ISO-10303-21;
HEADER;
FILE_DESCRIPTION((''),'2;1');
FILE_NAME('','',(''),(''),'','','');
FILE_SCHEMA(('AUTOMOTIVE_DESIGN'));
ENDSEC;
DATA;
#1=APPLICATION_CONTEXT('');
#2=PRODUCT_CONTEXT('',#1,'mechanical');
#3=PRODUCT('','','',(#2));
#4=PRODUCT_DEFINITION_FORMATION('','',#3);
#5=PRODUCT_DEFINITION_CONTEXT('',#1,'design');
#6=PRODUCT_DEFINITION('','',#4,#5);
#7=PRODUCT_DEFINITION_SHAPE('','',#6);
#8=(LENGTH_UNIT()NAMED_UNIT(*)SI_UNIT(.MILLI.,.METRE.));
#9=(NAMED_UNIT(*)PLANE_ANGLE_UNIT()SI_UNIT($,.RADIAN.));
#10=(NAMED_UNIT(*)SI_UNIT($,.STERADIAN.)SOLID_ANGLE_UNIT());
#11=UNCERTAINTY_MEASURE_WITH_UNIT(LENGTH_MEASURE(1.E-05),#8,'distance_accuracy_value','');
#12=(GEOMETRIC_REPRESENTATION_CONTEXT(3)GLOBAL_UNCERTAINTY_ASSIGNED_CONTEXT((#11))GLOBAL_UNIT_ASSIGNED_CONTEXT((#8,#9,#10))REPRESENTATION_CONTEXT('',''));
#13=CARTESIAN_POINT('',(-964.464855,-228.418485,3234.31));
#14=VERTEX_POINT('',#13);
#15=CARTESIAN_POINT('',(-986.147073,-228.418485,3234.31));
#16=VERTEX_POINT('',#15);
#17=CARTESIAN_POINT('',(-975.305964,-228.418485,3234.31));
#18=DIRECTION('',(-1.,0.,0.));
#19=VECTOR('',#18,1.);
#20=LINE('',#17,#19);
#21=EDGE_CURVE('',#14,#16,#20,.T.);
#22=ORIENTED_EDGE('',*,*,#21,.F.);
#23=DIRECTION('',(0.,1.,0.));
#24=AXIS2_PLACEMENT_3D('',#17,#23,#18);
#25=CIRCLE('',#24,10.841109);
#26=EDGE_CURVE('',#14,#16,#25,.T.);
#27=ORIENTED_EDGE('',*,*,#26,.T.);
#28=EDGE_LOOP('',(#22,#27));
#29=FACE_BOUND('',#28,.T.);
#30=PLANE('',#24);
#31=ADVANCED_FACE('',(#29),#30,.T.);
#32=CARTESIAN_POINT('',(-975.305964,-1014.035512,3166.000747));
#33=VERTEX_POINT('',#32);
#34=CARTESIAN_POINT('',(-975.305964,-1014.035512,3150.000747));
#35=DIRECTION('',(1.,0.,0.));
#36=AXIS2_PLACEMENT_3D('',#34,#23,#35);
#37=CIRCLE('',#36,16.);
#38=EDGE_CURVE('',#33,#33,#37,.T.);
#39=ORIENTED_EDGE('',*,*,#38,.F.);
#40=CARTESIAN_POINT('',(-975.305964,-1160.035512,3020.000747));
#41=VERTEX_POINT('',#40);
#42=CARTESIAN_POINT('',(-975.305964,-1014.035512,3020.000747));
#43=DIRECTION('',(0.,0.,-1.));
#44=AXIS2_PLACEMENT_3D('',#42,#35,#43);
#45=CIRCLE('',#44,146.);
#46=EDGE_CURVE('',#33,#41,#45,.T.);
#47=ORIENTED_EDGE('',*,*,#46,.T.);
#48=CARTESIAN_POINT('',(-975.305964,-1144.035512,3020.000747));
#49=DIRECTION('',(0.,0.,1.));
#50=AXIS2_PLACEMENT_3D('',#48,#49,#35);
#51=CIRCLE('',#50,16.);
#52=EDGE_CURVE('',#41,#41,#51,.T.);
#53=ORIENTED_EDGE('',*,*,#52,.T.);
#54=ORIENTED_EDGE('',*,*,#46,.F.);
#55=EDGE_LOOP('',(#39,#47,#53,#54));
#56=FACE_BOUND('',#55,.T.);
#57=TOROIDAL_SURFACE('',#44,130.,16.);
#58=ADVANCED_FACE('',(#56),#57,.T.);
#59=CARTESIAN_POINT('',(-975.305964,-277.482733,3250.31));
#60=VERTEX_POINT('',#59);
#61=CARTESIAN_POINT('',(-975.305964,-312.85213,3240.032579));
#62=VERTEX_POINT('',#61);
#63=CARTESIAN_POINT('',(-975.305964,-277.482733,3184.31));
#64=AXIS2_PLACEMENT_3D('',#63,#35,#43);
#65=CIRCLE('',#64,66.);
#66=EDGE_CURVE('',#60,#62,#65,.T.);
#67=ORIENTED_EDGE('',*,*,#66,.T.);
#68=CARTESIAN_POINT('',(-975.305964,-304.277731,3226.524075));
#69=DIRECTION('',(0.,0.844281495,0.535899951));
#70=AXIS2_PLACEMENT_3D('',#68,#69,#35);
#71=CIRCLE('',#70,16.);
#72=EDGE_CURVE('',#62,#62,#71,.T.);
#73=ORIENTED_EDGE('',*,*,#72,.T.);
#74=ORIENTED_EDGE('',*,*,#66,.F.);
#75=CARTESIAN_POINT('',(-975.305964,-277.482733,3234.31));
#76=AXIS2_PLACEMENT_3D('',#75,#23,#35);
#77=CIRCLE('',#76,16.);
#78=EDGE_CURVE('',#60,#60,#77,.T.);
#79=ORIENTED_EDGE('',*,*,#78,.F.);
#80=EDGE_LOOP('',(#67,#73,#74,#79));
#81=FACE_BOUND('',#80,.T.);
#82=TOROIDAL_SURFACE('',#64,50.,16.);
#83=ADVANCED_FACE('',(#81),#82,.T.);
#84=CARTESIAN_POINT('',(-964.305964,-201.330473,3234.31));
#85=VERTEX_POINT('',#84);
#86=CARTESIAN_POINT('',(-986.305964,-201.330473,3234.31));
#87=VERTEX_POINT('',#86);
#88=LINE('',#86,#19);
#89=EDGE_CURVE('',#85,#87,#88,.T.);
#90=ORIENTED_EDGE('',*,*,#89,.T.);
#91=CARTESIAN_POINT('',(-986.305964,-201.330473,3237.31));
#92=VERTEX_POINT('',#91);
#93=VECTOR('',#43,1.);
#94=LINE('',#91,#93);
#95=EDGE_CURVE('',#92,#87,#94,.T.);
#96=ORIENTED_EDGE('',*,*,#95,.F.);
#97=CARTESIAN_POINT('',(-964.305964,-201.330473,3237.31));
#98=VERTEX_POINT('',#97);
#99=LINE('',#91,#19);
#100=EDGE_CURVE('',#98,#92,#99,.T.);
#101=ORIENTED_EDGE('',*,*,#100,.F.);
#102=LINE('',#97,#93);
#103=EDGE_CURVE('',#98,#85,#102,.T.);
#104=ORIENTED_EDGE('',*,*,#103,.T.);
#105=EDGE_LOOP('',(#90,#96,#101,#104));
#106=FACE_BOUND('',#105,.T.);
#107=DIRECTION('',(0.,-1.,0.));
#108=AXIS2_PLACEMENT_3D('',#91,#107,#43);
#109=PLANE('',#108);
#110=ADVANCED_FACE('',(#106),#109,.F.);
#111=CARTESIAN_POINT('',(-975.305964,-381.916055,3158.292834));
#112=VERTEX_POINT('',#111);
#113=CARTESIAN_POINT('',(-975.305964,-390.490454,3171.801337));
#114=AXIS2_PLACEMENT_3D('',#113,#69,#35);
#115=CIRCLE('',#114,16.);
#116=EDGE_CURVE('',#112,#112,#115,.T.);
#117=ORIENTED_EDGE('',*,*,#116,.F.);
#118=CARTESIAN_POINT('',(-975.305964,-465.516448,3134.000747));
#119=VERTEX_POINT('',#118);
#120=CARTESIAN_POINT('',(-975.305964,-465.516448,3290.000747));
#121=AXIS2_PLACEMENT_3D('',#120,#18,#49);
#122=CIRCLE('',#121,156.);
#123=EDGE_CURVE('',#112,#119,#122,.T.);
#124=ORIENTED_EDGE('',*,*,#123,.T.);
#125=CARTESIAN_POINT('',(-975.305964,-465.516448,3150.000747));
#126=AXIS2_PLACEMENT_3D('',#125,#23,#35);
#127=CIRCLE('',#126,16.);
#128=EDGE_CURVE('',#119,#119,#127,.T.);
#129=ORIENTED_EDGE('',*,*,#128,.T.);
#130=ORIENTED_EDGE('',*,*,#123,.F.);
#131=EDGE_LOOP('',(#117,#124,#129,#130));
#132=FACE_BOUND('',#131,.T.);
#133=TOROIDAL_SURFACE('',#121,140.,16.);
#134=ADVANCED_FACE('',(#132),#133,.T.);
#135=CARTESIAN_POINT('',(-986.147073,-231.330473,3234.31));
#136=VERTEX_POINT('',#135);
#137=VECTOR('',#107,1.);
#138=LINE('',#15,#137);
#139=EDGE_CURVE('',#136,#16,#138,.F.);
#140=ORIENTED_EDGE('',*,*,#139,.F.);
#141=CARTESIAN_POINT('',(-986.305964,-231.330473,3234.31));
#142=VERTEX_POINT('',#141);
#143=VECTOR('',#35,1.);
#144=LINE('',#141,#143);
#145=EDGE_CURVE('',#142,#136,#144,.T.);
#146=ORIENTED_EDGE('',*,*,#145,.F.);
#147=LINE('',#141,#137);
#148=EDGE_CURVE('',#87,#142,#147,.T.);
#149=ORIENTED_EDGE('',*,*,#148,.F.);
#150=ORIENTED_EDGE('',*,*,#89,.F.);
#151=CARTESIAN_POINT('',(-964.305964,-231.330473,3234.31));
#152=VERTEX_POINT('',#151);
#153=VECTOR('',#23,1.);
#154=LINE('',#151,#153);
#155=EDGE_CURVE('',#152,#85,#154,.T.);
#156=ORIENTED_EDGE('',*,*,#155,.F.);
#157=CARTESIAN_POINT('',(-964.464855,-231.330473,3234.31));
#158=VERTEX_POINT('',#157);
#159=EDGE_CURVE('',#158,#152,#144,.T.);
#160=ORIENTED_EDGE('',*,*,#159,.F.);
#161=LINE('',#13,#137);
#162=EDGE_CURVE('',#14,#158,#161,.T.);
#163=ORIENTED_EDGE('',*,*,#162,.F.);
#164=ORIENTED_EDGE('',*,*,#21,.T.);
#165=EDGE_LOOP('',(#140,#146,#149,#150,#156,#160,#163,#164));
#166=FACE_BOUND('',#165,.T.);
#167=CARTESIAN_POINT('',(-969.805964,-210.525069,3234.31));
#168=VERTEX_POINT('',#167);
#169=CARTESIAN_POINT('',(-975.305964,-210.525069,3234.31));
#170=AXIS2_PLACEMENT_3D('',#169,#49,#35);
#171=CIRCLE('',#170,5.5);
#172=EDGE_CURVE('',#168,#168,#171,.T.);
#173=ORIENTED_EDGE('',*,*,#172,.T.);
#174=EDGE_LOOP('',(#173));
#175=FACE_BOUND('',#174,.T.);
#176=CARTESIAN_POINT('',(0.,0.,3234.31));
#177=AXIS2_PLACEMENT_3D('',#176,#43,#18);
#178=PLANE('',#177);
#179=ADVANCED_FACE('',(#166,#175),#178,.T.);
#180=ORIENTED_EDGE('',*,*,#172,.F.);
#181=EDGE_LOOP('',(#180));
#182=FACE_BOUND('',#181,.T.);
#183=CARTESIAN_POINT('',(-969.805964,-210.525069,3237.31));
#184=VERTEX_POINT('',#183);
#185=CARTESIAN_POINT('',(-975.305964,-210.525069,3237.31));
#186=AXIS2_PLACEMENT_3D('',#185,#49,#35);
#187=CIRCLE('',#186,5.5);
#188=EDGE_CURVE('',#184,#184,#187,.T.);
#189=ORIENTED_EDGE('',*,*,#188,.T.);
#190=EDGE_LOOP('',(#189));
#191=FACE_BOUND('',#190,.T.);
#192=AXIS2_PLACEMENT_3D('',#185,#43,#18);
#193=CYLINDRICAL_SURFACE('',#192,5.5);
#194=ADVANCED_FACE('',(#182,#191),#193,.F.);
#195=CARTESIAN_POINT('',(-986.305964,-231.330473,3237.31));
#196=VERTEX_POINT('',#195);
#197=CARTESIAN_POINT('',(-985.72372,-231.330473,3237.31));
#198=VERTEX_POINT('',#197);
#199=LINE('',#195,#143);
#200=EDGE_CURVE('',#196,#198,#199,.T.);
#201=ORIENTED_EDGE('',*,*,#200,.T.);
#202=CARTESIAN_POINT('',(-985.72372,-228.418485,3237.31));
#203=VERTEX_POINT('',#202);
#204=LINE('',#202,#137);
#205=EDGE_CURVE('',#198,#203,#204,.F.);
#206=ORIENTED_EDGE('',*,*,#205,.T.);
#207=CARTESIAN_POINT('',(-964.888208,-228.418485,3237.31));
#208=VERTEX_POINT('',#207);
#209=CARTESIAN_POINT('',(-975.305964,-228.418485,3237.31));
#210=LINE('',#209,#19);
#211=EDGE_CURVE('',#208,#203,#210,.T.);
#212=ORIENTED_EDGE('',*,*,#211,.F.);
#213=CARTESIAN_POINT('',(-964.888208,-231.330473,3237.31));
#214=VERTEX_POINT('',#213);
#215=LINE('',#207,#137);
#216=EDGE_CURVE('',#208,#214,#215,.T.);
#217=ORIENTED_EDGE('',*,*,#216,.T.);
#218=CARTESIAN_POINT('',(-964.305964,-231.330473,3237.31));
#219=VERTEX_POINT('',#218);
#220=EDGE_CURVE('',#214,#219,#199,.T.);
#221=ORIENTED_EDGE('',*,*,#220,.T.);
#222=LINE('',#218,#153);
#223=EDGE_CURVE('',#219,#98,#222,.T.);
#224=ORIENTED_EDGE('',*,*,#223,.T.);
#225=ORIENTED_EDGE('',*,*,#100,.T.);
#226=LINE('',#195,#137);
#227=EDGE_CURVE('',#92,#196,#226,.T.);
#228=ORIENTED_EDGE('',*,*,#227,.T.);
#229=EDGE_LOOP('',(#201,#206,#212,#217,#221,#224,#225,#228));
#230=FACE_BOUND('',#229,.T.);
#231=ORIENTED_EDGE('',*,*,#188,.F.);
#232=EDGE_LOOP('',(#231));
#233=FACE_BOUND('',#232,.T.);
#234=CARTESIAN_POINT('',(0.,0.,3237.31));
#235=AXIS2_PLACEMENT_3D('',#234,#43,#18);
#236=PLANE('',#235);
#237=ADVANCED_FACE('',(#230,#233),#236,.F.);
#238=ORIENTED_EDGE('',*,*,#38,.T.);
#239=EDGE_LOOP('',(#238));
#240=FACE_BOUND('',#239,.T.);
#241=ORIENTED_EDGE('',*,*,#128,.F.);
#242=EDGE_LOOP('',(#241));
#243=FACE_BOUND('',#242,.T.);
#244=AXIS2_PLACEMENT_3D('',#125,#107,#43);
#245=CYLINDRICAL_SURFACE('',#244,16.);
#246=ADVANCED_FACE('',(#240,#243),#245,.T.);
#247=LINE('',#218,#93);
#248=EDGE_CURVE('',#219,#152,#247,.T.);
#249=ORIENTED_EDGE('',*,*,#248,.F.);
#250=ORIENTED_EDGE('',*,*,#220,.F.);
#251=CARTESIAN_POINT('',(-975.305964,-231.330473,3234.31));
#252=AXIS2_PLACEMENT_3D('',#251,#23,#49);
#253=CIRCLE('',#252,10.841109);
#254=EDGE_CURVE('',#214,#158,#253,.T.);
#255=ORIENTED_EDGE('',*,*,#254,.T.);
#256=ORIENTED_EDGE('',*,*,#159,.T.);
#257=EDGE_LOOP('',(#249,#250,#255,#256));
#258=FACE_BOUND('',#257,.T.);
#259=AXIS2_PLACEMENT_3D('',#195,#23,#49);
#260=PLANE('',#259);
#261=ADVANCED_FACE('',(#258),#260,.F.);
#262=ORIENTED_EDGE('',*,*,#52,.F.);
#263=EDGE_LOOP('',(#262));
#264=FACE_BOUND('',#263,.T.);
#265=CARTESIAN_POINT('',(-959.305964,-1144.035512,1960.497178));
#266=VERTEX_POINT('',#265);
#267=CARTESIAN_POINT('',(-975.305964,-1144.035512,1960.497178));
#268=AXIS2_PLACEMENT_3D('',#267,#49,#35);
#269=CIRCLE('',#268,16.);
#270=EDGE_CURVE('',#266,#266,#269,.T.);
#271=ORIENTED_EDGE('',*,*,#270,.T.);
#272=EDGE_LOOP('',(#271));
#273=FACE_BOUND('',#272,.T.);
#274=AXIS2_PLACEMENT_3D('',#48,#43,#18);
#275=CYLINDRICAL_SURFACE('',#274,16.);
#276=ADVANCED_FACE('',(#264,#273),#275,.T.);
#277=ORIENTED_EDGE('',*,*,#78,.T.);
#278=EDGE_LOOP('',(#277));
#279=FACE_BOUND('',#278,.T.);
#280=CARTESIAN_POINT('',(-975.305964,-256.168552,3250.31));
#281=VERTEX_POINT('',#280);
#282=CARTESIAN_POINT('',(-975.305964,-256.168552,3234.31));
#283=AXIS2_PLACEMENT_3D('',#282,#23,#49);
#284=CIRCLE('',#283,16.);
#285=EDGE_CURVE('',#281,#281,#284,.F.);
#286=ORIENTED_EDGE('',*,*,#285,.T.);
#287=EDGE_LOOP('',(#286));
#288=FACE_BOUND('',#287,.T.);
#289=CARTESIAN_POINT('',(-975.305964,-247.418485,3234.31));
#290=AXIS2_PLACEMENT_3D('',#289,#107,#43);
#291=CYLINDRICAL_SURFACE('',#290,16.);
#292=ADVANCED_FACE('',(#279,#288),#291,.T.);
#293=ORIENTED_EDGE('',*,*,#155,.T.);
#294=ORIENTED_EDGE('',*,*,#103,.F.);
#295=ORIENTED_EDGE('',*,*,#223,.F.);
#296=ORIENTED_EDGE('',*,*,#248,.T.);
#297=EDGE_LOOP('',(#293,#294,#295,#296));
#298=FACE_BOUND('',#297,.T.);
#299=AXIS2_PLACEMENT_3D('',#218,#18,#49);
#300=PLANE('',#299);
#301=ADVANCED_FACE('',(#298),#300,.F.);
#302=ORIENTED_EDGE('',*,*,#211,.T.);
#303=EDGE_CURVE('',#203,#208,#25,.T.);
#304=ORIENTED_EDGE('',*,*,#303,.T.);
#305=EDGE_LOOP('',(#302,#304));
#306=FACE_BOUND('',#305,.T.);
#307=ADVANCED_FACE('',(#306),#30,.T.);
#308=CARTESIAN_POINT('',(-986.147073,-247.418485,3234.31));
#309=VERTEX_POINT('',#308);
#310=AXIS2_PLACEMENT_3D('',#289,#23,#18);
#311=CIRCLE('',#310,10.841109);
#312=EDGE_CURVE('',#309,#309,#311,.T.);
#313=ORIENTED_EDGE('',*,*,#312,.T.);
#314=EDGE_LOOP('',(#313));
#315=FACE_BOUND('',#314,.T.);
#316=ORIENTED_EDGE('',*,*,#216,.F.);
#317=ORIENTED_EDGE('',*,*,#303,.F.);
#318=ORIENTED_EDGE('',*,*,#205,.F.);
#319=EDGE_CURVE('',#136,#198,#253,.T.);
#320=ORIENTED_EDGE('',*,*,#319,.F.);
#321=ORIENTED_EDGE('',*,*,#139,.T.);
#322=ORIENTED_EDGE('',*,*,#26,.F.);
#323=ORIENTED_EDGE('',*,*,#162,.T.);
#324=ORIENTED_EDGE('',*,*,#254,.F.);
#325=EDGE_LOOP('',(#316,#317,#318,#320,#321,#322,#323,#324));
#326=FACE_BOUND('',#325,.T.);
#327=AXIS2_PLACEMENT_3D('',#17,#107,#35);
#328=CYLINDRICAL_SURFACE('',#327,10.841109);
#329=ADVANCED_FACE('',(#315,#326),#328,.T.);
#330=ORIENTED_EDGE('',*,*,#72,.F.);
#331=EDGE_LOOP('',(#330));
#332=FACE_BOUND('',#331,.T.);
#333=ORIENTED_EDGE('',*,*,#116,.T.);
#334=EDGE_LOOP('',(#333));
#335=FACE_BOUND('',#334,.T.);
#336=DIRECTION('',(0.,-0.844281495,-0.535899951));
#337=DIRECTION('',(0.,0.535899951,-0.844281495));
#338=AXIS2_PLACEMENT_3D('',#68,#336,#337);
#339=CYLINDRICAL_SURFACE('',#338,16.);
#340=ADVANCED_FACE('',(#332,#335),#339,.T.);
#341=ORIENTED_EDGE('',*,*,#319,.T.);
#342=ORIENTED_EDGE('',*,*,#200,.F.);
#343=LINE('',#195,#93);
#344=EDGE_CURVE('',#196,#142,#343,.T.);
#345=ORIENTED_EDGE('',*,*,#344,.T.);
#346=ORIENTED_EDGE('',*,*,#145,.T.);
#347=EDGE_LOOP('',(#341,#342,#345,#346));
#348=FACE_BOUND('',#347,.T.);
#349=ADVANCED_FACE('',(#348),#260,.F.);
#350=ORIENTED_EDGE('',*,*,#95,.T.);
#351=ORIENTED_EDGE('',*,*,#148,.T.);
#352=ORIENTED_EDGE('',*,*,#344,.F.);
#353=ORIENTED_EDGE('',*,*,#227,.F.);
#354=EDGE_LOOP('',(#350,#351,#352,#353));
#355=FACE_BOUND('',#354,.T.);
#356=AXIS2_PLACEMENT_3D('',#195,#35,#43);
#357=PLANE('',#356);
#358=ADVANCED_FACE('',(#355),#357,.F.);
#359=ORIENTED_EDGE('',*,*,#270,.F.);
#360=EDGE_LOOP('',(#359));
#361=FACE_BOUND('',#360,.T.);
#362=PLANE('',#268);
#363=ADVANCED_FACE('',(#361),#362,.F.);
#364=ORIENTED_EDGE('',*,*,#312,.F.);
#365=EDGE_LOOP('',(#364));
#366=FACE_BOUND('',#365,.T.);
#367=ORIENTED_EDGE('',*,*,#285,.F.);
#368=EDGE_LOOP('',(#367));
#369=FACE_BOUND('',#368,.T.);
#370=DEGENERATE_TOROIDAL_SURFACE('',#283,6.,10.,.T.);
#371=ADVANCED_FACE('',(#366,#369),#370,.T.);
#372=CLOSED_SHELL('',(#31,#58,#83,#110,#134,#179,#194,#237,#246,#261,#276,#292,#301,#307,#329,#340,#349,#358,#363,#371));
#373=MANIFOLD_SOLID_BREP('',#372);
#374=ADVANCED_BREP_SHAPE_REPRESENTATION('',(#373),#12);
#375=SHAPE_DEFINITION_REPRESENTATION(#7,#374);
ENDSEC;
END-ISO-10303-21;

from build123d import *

# Parameters (mm, degrees)
BARRER1_PROFILE_R       = 16
CROQUIS14_W             = 22
CROQUIS14_H             = 30
CROQUIS14_R             = 5.5
SALIENTE_EXTRUIR1_DEPTH = 3
CROQUIS15_R             = 10.841108792
SALIENTE_EXTRUIR2_DEPTH = 19
REDONDEO1_R             = 10


with BuildPart() as part:
    # Barrer1: sweep along a curve in space
    with BuildLine() as barrer1_path:
        Line((-975.305963879, -247.418485436, 3234.31), (-975.305963879, -277.482733156, 3234.31))
        ThreePointArc((-975.305963879, -277.482733156, 3234.31), (-975.305963879, -291.434368594, 3232.3240799), (-975.305963879, -304.277730703, 3226.524074744))
        Line((-975.305963879, -304.277730703, 3226.524074744), (-975.305963879, -390.490454439, 3171.801337481))
        ThreePointArc((-975.305963879, -390.490454439, 3171.801337481), (-975.305963879, -426.451868342, 3155.561323045), (-975.305963879, -465.51644757, 3150.000746764))
        Line((-975.305963879, -465.51644757, 3150.000746764), (-975.305963879, -1014.035511618, 3150.000746764))
        ThreePointArc((-975.305963879, -1144.035511618, 3020.000746764), (-975.305963879, -1105.959393172, 3111.924628318), (-975.305963879, -1014.035511618, 3150.000746764))
        Line((-975.305963879, -1144.035511618, 3020.000746764), (-975.305963879, -1144.035511618, 1960.497178493))
    # Barrer1 profile (on start of the path) → Barrer1 (sweep)
    with BuildSketch(Plane(origin=(-975.305963879, -247.418485436, 3234.31), x_dir=(0, 0, -1), z_dir=(0, -1, 0))):
        Circle(BARRER1_PROFILE_R)
    sweep(path=barrer1_path.line)



with BuildPart() as body_2:
    # Croquis14 → Saliente-Extruir1 (new body)
    with BuildSketch(Plane.XY.offset(3234.31)):
        with Locations((-975.305963879, -216.330473188)):
            Rectangle(CROQUIS14_W, CROQUIS14_H)
        with Locations((-975.305963879, -210.525068536)):
            Circle(CROQUIS14_R, mode=Mode.SUBTRACT)
    extrude(amount=SALIENTE_EXTRUIR1_DEPTH)


with BuildPart() as part_1:
    add(part.part)

    add(body_2.part)  # Saliente-Extruir2 merges body 2
    # Croquis15 → Saliente-Extruir2 (add)
    with BuildSketch(Plane(origin=(0, -247.418485436, 0), x_dir=(1, 0, 0), z_dir=(0, 1, 0))):
        with Locations(Location((-975.305963879, -3234.31, 0), (0, 0, 180))):
            Circle(CROQUIS15_R)
    extrude(amount=SALIENTE_EXTRUIR2_DEPTH)

    # Redondeo1
    # the kernel refuses this fillet: 10 mm, written as the material it takes off along each edge
    with BuildSketch(Plane(origin=(-975.305963879, -247.418485436, 3234.31), x_dir=(0, 0, -1), z_dir=(-1, 0, 0))) as redondeo1_piece_1:
        with BuildLine():
            CenterArc((6, 8.75006661), REDONDEO1_R, 298.954236043, 61.045763957)
            Line((10.841108792, 0), (10.937930967, -0.175001332))
            ThreePointArc((10.937930967, -0.175001332), (13.420554396, -0.2), (16, -0.2))
            Line((16, -0.2), (16.2, 0))
            Line((16.2, 0), (16.2, 8.75006661))
            Line((16.2, 8.75006661), (16, 8.75006661))
        make_face()
    revolve(axis=Axis((-975.305963879, -247.418485436, 3234.31), (0, -1, 0)), mode=Mode.SUBTRACT)


solid = part_1.part
